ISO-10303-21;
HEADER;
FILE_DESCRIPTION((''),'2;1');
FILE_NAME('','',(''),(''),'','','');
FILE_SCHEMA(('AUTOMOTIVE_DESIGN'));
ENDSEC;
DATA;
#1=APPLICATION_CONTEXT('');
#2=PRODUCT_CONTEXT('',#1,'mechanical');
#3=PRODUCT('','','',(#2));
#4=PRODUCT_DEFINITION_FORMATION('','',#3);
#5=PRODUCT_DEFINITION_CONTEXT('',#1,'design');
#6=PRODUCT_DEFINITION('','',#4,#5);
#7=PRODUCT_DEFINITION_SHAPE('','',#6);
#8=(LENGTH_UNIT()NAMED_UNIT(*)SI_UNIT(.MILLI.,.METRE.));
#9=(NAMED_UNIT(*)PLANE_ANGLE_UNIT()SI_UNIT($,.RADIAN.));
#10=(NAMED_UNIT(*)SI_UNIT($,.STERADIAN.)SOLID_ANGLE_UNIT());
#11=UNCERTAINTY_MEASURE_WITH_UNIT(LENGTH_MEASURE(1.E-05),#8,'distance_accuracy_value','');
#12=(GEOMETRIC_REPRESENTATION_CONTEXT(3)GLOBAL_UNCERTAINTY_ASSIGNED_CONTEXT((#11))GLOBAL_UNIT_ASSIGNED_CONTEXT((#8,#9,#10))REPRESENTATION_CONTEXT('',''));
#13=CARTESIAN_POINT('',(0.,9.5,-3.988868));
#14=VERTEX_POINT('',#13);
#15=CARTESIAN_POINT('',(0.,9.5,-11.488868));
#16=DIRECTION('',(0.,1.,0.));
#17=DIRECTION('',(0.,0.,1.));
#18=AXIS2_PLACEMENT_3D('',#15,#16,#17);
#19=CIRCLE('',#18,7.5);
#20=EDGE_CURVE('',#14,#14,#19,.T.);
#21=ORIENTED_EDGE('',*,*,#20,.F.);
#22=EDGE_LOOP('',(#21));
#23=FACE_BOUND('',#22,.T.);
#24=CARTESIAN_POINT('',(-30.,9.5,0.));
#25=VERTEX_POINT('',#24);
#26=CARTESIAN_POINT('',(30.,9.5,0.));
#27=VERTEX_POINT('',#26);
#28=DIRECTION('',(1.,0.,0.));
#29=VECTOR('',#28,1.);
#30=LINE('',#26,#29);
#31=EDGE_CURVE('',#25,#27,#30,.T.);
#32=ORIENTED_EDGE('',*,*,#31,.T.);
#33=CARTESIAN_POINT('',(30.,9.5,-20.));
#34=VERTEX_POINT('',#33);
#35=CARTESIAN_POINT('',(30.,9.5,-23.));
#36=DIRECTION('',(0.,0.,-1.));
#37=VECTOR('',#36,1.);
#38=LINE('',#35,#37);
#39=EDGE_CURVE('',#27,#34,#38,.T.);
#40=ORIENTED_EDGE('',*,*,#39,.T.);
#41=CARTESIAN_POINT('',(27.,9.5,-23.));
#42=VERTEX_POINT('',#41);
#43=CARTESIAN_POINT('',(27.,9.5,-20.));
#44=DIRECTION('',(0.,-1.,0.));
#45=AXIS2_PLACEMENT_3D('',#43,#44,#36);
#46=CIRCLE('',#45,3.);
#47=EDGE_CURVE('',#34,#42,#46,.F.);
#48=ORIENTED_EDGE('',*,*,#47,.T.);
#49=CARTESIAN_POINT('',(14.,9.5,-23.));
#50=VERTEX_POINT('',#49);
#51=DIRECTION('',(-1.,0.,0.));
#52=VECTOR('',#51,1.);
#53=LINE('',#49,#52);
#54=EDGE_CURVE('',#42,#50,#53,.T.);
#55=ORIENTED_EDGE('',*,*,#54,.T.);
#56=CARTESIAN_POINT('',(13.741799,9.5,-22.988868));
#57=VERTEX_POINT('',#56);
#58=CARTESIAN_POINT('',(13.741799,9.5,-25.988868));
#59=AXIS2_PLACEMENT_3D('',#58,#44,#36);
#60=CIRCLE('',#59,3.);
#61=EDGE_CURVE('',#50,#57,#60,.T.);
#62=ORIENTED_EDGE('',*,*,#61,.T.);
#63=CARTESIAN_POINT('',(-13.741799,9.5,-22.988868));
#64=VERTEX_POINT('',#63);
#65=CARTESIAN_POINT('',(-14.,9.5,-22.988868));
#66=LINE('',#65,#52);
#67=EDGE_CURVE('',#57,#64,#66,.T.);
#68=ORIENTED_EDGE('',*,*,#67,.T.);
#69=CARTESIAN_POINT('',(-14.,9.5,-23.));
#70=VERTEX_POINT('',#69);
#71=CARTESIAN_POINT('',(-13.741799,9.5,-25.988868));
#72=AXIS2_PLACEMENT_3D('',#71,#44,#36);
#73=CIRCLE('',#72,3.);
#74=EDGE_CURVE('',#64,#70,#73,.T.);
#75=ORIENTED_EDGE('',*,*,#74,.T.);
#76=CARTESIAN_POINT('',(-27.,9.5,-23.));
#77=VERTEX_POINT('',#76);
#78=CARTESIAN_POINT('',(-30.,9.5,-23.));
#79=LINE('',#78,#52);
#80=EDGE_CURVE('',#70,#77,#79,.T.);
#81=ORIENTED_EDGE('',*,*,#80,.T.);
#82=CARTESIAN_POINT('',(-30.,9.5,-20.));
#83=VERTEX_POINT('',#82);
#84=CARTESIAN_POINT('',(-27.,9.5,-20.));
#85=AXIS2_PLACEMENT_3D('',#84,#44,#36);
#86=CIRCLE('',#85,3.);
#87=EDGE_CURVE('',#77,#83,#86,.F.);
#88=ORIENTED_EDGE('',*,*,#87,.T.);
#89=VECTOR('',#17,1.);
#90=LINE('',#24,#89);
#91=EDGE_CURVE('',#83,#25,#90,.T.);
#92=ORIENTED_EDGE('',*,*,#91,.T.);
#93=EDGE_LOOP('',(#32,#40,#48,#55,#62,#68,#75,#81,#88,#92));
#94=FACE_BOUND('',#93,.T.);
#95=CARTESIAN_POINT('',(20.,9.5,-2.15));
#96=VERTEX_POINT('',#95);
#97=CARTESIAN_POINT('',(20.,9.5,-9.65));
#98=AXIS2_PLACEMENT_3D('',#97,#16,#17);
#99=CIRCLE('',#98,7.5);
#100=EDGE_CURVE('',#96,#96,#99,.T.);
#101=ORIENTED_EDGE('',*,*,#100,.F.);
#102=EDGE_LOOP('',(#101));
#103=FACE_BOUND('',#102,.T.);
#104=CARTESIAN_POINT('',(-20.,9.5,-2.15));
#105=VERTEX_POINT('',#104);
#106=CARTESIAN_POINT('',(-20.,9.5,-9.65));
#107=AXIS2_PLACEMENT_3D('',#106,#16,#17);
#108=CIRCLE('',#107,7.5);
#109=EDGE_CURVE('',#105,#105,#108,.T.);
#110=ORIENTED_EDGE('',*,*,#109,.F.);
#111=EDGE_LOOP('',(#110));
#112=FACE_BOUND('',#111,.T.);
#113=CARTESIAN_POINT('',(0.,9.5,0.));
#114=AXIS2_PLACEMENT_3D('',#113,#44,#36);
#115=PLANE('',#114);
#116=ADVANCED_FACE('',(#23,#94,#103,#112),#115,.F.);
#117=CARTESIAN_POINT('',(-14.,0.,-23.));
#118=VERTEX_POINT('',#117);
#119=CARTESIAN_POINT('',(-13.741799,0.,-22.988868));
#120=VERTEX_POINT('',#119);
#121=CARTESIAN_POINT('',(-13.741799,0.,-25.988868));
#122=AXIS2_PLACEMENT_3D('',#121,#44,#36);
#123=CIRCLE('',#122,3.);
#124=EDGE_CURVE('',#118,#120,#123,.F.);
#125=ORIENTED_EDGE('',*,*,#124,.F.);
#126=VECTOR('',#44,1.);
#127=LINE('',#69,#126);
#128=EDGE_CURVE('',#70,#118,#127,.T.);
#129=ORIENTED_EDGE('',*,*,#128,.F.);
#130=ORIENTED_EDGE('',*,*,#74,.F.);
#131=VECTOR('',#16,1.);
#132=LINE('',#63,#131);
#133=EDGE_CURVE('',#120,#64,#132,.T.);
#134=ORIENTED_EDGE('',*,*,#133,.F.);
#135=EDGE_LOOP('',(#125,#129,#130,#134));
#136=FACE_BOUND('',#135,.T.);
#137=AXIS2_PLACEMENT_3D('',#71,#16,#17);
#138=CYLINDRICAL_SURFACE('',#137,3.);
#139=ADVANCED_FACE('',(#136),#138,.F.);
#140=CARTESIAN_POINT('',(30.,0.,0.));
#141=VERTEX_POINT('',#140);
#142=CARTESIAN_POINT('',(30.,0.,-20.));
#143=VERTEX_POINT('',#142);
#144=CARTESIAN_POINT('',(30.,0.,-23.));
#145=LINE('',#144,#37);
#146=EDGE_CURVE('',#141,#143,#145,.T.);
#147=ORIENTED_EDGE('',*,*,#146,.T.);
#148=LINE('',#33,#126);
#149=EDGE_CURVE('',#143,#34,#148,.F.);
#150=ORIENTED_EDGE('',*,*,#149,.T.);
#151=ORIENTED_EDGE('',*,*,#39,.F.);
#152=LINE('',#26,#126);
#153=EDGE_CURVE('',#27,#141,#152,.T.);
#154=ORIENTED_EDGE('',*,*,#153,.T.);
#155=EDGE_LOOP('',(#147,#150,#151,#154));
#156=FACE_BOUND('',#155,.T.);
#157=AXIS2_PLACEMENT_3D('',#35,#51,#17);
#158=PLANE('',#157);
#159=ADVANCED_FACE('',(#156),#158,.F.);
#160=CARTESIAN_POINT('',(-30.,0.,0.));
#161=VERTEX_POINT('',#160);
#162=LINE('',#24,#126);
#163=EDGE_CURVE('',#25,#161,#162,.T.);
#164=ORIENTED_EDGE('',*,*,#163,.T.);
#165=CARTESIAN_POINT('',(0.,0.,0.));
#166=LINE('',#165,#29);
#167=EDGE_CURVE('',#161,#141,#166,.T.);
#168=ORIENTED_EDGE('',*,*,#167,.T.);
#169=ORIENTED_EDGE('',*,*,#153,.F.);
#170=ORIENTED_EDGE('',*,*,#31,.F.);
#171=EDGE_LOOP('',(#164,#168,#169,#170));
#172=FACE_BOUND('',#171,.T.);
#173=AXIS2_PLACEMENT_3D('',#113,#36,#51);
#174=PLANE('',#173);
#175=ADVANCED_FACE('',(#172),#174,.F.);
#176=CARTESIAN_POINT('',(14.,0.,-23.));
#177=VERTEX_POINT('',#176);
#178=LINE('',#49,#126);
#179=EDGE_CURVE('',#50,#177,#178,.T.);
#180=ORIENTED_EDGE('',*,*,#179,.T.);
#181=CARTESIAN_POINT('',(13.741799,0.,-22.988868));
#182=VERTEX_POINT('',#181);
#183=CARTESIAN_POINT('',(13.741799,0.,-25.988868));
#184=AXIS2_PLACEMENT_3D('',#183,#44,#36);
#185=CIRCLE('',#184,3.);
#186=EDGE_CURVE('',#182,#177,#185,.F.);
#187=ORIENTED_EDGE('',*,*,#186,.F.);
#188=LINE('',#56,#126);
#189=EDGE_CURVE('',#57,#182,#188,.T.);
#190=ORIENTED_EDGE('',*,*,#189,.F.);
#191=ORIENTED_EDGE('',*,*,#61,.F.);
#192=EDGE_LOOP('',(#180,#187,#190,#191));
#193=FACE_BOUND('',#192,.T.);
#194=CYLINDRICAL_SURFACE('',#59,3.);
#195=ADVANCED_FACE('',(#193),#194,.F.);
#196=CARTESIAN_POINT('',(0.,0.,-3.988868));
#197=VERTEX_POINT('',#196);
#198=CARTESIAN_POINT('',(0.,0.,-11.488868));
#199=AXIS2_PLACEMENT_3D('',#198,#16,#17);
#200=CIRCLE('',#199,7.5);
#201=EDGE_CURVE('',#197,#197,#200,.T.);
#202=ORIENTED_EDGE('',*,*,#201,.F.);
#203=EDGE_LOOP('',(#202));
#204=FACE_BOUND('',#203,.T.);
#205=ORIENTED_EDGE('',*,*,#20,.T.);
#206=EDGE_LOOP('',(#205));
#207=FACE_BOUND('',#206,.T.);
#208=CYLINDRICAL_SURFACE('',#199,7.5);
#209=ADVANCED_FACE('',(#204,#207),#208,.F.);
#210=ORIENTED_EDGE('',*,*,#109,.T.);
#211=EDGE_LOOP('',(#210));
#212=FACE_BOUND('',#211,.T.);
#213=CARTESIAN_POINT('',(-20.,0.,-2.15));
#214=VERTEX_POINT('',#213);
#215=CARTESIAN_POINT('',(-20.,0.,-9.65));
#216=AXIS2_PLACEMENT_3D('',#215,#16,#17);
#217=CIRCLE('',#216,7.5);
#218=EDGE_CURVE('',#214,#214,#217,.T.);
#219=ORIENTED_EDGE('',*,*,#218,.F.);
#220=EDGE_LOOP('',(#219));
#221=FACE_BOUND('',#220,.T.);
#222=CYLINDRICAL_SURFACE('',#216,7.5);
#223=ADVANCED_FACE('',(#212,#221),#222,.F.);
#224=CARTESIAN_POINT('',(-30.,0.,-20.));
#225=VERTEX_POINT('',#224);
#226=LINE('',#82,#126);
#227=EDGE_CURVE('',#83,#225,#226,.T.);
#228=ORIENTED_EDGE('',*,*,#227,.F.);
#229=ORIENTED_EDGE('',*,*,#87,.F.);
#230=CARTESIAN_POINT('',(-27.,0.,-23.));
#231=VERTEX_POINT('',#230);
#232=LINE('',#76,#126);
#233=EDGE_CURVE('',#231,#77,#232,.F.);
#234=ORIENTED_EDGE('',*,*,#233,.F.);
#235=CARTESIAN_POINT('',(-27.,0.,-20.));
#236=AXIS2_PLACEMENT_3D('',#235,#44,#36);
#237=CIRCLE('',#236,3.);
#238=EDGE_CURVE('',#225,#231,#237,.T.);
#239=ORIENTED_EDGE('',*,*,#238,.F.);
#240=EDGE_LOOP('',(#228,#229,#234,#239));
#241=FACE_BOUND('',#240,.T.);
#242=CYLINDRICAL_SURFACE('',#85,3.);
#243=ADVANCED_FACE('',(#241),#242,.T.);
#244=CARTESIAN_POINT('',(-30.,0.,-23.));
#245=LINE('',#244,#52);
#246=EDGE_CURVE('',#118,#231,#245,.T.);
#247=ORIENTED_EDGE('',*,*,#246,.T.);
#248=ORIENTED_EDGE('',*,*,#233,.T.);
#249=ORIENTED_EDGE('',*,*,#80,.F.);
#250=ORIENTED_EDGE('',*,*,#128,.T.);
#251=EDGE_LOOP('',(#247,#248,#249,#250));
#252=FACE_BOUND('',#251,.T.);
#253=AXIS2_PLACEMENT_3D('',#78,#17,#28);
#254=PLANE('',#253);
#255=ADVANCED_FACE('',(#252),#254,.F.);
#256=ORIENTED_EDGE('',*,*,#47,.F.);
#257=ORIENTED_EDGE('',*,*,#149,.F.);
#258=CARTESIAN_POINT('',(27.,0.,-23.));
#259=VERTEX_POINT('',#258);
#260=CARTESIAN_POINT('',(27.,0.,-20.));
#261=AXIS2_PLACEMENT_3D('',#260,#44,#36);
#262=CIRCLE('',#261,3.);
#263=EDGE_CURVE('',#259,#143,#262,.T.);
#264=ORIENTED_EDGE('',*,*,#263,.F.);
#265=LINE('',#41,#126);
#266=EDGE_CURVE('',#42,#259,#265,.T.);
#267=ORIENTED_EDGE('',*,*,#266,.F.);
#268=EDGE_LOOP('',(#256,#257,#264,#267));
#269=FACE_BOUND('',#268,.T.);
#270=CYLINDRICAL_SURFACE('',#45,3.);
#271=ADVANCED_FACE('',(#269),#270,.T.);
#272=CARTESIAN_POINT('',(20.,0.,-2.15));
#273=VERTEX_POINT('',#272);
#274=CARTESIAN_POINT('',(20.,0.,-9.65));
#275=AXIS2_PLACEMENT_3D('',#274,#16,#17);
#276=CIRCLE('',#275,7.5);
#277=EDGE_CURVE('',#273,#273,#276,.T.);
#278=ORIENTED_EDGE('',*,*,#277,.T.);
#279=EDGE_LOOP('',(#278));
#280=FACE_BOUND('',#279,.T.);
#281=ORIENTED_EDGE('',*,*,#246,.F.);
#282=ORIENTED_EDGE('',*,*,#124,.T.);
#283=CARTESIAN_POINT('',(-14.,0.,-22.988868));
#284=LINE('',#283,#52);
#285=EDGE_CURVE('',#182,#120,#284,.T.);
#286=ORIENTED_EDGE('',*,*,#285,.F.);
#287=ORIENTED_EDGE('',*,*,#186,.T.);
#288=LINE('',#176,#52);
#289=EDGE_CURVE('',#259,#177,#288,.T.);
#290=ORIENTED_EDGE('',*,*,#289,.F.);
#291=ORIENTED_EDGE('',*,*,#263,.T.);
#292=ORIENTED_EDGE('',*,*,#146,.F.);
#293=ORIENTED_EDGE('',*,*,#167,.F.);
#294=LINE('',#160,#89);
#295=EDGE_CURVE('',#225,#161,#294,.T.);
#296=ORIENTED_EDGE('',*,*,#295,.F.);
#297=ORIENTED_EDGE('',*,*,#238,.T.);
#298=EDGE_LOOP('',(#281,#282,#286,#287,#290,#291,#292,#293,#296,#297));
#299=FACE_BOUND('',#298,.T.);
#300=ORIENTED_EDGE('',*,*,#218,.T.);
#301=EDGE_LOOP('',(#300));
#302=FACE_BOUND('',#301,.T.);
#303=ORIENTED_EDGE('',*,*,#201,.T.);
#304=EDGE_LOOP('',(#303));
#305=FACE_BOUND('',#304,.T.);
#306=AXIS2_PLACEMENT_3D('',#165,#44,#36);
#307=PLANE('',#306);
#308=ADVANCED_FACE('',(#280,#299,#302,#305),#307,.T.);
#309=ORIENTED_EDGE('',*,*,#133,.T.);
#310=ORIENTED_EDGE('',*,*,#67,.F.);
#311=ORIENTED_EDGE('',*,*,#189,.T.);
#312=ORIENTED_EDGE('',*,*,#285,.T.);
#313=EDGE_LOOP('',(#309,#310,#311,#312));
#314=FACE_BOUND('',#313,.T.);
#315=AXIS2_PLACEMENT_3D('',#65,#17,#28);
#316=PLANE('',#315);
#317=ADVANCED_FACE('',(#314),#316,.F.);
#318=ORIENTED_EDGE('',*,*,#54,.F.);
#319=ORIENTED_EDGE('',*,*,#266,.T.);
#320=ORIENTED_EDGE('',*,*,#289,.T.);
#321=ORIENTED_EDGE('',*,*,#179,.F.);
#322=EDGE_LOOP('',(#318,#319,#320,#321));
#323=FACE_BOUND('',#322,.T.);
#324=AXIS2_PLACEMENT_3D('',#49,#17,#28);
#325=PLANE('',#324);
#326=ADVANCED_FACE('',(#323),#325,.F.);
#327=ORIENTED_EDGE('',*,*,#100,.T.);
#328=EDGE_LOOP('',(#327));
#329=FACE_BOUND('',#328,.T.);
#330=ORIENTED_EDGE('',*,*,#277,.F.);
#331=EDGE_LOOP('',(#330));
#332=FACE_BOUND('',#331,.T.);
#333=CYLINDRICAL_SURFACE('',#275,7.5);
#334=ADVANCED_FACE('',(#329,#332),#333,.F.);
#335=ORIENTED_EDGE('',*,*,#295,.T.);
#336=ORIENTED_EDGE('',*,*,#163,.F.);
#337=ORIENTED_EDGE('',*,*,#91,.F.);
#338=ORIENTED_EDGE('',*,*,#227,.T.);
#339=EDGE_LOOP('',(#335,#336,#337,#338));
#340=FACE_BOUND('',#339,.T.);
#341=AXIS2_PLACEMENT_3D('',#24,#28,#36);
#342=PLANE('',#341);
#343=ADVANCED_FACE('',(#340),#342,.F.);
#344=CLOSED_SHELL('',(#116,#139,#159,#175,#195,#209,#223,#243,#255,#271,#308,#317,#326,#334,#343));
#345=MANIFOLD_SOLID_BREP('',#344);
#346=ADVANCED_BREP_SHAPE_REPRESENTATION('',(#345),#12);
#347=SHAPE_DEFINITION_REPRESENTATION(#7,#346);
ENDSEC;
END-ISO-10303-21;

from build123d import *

# Parameters (mm, degrees)
EXTRUDE_1_DEPTH     = 9.5
SKETCH_3_R          = 7.5
CUT_EXTRUDE_2_DEPTH = 39.977557645
FILLET_2_R          = 3


with BuildPart() as part:
    # 草图1 → 凸台-拉伸1 (new body)
    with BuildSketch(Plane(origin=(0, 0, 0), x_dir=(1, 0, 0), z_dir=(0, 1, 0))):
        Polygon((0, 0), (-30, 0), (-30, 23), (-14, 23), (-14, 22.98886809), (14, 22.98886809), (14, 23), (30, 23), (30, 0), align=None)
    extrude(amount=EXTRUDE_1_DEPTH)

    # 草图3 → 切除-拉伸2 (cut, through all)
    with BuildSketch(Plane(origin=(0, 9.5, 0), x_dir=(1, 0, 0), z_dir=(0, 1, 0))):
        with Locations(Location((0, 11.48886809, 0), (0, 0, 270))):
            Circle(SKETCH_3_R)
        with Locations(Location((-20, 9.65, 0), (0, 0, 270))):
            Circle(SKETCH_3_R)
        with Locations(Location((20, 9.65, 0), (0, 0, 270))):
            Circle(SKETCH_3_R)
    extrude(amount=-CUT_EXTRUDE_2_DEPTH, mode=Mode.SUBTRACT)

    # 圆角2
    # the kernel refuses this fillet: 3 mm, written as the material it adds along each edge
    with BuildSketch(Plane(origin=(14, 0, -22.98886809), x_dir=(0, 0, -1), z_dir=(0, 1, 0))) as fillet_2_piece_1:
        with BuildLine():
            CenterArc((3, 0.25820058), FILLET_2_R, 180, 4.937376285)
            Line((0, 0.25820058), (0, 0))
            Line((0, 0), (0.01113191, 0))
        make_face()
    extrude(amount=9.5)
    with BuildSketch(Plane(origin=(-14, 0, -22.98886809), x_dir=(0, 0, -1), z_dir=(0, 1, 0))) as fillet_2_piece_2:
        with BuildLine():
            CenterArc((3, -0.25820058), FILLET_2_R, 175.062623715, 4.937376285)
            Line((0, -0.25820058), (0, 0))
            Line((0, 0), (0.01113191, 0))
        make_face()
    extrude(amount=9.5)
    # the kernel refuses this fillet: 3 mm, written as the material it takes off along each edge
    with BuildSketch(Plane(origin=(30, -7.5, -23), x_dir=(0, 0, 1), z_dir=(0, 1, 0))) as fillet_2_2_piece_1:
        with BuildLine():
            CenterArc((FILLET_2_R, -FILLET_2_R), FILLET_2_R, 90, 90)
            Line((0, -FILLET_2_R), (0, 0))
            Line((0, 0), (FILLET_2_R, 0))
        make_face()
    extrude(amount=24.5, mode=Mode.SUBTRACT)
    with BuildSketch(Plane(origin=(-30, -7.5, -23), x_dir=(0, 0, 1), z_dir=(0, 1, 0))) as fillet_2_2_piece_2:
        with BuildLine():
            CenterArc((FILLET_2_R, FILLET_2_R), FILLET_2_R, 180, 90)
            Line((0, FILLET_2_R), (0, 0))
            Line((0, 0), (FILLET_2_R, 0))
        make_face()
    extrude(amount=24.5, mode=Mode.SUBTRACT)


solid = part.part
